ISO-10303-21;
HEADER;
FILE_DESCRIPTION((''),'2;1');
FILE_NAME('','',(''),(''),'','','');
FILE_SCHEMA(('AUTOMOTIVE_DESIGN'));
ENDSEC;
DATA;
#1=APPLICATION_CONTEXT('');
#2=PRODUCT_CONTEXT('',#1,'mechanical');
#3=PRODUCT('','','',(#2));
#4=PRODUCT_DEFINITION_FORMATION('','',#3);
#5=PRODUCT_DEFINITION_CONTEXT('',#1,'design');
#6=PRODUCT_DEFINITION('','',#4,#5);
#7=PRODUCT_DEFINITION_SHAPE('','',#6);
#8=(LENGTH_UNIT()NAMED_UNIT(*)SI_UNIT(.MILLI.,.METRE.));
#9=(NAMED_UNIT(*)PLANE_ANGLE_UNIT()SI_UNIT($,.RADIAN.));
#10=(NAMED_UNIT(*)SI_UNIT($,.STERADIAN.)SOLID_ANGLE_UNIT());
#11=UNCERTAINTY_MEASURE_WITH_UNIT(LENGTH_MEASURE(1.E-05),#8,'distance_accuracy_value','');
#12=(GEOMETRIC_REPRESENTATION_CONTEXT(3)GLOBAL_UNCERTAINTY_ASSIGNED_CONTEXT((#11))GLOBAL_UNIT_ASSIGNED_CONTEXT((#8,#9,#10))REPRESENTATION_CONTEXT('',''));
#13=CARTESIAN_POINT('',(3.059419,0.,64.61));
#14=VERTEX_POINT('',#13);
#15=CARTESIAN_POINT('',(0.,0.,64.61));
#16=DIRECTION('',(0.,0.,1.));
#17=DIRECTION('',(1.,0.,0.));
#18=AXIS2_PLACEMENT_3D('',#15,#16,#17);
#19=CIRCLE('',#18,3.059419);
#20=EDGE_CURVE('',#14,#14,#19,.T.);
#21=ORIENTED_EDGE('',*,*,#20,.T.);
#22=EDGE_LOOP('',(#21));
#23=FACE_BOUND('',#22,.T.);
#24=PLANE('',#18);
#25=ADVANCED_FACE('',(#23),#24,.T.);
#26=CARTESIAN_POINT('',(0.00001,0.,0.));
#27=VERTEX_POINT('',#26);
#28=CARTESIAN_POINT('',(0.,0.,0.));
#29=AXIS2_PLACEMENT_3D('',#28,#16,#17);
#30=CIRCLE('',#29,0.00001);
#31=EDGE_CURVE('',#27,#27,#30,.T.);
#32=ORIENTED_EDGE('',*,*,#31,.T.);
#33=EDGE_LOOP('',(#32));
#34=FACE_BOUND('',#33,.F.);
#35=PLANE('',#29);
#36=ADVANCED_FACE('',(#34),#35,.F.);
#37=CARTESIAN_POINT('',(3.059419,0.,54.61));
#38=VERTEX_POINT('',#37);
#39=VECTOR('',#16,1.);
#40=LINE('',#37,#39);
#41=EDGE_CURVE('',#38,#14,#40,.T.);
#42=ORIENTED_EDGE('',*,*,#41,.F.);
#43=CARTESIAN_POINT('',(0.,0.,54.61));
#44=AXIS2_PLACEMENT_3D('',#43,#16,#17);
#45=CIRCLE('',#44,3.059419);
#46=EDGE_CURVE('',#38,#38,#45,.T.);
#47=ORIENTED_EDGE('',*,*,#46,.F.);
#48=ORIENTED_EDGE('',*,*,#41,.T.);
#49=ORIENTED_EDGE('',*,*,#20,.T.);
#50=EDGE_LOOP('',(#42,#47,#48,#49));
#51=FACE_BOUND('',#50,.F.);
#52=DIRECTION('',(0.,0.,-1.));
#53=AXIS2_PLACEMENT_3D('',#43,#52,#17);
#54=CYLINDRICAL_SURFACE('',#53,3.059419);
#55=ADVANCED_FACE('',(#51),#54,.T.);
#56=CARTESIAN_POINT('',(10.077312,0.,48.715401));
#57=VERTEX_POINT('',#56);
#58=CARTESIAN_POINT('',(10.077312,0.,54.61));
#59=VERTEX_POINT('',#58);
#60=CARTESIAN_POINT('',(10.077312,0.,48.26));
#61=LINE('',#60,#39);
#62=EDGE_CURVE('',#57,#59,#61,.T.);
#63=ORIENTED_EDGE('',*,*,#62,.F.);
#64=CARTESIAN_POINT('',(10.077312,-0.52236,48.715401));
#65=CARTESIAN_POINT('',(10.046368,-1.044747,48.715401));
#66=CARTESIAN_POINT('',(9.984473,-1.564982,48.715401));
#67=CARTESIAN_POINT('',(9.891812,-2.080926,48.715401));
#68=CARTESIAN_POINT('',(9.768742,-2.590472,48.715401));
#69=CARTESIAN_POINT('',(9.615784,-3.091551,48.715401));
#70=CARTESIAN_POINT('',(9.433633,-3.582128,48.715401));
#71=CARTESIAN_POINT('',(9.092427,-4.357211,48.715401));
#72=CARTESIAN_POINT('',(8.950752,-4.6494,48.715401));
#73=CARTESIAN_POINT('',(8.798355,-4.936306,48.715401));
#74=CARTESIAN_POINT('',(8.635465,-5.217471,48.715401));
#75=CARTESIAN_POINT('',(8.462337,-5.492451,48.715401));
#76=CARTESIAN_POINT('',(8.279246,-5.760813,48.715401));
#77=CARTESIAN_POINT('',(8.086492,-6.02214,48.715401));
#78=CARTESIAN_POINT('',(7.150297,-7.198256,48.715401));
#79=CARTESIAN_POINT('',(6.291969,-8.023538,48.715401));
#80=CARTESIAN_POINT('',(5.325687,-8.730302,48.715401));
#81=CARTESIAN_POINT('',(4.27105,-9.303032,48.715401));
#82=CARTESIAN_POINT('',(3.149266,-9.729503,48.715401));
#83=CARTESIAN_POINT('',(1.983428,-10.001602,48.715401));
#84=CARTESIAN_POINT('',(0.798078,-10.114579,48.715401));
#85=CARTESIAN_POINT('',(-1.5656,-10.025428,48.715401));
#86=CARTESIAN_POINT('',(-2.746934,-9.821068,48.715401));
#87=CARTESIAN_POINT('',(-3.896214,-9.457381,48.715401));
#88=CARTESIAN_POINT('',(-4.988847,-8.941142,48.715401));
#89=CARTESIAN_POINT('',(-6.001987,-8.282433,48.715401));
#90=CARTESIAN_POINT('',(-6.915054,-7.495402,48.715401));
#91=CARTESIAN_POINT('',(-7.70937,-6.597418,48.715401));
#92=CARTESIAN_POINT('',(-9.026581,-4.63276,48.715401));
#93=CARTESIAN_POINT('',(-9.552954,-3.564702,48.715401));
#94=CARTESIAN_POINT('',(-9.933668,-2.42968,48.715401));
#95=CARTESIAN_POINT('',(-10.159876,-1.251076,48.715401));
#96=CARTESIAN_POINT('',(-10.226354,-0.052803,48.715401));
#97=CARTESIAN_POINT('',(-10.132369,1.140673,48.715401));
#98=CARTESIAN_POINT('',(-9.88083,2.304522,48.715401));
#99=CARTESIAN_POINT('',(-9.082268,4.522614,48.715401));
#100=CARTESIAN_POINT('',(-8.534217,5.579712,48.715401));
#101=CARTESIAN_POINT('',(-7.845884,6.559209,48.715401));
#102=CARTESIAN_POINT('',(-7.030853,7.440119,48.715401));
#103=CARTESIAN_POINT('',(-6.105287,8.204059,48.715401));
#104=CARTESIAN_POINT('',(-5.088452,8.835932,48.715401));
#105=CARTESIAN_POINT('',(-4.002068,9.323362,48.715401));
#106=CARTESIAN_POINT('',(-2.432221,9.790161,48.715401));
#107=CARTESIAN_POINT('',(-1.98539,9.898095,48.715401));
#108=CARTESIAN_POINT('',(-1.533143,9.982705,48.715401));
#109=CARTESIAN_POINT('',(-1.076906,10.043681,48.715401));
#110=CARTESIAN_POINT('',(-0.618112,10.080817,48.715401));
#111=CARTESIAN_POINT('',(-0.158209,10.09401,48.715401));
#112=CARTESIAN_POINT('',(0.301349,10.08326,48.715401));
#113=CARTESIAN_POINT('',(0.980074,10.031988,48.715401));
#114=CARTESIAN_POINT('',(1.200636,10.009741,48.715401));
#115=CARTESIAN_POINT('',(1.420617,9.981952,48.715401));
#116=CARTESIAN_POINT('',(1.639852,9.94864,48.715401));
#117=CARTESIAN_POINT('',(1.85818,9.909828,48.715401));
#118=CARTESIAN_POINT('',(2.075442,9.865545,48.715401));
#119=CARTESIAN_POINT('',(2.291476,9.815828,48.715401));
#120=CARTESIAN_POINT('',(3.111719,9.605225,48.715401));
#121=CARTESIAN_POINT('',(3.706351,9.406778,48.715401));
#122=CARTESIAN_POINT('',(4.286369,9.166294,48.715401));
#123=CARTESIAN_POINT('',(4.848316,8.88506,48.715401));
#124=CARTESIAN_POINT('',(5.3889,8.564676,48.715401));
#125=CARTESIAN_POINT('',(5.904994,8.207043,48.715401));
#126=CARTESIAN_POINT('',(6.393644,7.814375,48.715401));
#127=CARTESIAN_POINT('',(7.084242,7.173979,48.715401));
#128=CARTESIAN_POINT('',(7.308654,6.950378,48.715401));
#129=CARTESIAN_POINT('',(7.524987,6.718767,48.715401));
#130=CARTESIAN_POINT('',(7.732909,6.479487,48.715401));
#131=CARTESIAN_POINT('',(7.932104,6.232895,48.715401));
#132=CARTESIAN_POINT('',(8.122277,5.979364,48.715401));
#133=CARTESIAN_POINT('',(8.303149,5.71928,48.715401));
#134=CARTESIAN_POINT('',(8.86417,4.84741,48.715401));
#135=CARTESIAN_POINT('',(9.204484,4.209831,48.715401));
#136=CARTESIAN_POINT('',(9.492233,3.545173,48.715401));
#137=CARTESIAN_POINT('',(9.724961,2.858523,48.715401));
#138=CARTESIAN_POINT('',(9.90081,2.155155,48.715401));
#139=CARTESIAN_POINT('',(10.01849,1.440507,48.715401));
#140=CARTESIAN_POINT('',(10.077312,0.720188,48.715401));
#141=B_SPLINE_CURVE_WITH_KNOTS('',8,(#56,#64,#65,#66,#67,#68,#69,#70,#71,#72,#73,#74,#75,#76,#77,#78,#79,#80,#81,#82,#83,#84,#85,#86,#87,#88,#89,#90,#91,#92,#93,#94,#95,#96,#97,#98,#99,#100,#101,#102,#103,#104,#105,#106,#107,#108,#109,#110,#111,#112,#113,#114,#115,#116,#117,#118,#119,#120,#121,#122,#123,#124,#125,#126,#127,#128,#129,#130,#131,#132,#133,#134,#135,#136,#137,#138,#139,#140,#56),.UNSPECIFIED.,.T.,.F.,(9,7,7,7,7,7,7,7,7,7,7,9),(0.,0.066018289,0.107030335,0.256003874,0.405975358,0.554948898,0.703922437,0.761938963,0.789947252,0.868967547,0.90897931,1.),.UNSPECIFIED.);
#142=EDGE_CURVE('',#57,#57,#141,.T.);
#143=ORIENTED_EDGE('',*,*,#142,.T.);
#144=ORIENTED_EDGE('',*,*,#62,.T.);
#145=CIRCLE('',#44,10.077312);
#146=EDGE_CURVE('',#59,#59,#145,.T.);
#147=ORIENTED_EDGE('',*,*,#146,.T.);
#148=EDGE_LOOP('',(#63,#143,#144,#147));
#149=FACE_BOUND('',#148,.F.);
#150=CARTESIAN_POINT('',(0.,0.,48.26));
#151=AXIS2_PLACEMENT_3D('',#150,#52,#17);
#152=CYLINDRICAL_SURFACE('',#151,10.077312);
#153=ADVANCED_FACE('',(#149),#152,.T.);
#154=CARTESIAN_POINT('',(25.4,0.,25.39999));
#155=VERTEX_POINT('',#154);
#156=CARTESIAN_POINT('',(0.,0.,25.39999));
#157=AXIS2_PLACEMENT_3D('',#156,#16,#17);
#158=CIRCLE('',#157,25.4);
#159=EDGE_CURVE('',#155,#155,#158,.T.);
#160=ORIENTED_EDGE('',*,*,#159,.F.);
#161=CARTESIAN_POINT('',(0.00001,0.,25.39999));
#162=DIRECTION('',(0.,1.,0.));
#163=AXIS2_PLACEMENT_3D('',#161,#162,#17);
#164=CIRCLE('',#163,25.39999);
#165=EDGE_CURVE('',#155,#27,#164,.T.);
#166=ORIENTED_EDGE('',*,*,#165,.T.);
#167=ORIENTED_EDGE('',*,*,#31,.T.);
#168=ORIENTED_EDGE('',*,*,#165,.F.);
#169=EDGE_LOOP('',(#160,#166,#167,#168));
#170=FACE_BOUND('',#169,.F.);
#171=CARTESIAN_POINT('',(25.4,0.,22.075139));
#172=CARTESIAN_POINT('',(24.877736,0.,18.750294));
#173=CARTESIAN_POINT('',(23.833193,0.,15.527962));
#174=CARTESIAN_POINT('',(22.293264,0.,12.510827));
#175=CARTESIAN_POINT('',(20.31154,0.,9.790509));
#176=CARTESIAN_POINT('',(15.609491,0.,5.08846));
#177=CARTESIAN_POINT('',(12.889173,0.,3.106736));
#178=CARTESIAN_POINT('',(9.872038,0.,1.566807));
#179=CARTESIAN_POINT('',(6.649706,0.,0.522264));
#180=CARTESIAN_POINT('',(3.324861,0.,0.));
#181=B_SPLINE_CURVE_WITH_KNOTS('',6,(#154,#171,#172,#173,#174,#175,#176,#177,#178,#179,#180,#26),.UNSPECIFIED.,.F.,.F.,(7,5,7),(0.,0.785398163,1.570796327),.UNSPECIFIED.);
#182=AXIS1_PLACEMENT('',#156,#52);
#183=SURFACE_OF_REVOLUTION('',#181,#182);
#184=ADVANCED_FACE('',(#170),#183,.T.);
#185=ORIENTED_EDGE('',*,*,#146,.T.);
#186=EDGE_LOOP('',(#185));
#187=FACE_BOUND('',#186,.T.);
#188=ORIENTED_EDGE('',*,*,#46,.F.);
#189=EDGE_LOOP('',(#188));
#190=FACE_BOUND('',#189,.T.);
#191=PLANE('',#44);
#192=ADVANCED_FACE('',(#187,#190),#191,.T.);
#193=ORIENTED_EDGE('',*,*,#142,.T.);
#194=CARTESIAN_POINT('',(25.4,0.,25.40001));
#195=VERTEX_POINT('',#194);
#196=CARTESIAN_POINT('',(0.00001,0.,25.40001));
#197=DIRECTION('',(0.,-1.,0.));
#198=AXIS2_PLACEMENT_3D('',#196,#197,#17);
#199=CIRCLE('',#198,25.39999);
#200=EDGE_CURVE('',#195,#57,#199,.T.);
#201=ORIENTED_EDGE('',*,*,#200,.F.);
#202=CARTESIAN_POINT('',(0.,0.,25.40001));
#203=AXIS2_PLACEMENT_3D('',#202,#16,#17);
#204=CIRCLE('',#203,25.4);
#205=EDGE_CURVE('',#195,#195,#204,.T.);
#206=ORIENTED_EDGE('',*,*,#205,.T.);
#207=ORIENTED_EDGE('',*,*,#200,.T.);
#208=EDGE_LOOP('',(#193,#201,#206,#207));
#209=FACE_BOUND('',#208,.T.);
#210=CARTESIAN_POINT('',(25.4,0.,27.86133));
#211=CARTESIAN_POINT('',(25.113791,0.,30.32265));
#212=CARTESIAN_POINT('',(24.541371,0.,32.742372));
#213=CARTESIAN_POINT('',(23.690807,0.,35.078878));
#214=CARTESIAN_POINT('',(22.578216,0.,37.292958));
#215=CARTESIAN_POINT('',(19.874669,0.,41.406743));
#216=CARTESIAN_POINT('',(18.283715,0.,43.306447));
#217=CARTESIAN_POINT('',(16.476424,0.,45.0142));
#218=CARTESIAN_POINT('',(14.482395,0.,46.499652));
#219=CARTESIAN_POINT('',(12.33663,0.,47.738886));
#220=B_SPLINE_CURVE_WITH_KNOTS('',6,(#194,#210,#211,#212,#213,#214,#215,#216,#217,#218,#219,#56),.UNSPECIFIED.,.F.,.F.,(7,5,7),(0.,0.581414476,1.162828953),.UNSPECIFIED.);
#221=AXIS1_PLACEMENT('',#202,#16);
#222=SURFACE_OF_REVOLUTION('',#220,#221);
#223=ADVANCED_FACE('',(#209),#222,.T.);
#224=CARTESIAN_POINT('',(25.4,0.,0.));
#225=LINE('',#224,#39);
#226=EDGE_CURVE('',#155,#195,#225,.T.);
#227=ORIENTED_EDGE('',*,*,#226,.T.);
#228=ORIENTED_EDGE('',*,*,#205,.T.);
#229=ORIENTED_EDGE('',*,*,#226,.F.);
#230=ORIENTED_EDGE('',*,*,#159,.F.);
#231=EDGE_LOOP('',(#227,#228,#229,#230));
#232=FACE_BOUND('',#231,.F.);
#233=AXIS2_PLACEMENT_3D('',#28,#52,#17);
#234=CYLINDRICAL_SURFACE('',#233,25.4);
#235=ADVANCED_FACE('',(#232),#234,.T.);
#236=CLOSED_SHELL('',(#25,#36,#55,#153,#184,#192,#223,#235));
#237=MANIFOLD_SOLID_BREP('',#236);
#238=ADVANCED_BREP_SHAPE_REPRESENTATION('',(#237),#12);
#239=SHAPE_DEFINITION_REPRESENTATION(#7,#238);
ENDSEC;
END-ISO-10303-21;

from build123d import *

# Parameters (mm, degrees)
F0_R     = 25.4
F1_DEPTH = 50.8
F2_R     = 25.39999
F4_R     = 10.0773123243
F5_DEPTH = 6.35
F7_R     = 3.0594191455
F8_DEPTH = 10


# Not quite as in the source:
# - a fillet or chamfer is up to 0.001 mm smaller than in the source, because OpenCascade refuses the exact size


with BuildPart() as f1:
    # F0 (on Top) → F1 (new body)
    with BuildSketch(Plane.XY):
        Circle(F0_R)
    extrude(amount=F1_DEPTH)

    # F2 (radius 25.4 in the source; OpenCascade refuses exactly that, so slightly less here)
    f2_edges = [f1.edges().sort_by_distance(p)[0] for p in [
        (-25.4, 0, 50.8),
        (-25.4, 0, 0),
    ]]
    fillet(f2_edges, radius=F2_R)

    # F4 (on offset) → F5 (join)
    with BuildSketch(Plane.XY.offset(48.26)):
        Circle(F4_R)
    extrude(amount=F5_DEPTH)

    # F7 (on offset) → F8 (join)
    with BuildSketch(Plane.XY.offset(54.61)):
        Circle(F7_R)
    extrude(amount=F8_DEPTH)


solid = f1.part
